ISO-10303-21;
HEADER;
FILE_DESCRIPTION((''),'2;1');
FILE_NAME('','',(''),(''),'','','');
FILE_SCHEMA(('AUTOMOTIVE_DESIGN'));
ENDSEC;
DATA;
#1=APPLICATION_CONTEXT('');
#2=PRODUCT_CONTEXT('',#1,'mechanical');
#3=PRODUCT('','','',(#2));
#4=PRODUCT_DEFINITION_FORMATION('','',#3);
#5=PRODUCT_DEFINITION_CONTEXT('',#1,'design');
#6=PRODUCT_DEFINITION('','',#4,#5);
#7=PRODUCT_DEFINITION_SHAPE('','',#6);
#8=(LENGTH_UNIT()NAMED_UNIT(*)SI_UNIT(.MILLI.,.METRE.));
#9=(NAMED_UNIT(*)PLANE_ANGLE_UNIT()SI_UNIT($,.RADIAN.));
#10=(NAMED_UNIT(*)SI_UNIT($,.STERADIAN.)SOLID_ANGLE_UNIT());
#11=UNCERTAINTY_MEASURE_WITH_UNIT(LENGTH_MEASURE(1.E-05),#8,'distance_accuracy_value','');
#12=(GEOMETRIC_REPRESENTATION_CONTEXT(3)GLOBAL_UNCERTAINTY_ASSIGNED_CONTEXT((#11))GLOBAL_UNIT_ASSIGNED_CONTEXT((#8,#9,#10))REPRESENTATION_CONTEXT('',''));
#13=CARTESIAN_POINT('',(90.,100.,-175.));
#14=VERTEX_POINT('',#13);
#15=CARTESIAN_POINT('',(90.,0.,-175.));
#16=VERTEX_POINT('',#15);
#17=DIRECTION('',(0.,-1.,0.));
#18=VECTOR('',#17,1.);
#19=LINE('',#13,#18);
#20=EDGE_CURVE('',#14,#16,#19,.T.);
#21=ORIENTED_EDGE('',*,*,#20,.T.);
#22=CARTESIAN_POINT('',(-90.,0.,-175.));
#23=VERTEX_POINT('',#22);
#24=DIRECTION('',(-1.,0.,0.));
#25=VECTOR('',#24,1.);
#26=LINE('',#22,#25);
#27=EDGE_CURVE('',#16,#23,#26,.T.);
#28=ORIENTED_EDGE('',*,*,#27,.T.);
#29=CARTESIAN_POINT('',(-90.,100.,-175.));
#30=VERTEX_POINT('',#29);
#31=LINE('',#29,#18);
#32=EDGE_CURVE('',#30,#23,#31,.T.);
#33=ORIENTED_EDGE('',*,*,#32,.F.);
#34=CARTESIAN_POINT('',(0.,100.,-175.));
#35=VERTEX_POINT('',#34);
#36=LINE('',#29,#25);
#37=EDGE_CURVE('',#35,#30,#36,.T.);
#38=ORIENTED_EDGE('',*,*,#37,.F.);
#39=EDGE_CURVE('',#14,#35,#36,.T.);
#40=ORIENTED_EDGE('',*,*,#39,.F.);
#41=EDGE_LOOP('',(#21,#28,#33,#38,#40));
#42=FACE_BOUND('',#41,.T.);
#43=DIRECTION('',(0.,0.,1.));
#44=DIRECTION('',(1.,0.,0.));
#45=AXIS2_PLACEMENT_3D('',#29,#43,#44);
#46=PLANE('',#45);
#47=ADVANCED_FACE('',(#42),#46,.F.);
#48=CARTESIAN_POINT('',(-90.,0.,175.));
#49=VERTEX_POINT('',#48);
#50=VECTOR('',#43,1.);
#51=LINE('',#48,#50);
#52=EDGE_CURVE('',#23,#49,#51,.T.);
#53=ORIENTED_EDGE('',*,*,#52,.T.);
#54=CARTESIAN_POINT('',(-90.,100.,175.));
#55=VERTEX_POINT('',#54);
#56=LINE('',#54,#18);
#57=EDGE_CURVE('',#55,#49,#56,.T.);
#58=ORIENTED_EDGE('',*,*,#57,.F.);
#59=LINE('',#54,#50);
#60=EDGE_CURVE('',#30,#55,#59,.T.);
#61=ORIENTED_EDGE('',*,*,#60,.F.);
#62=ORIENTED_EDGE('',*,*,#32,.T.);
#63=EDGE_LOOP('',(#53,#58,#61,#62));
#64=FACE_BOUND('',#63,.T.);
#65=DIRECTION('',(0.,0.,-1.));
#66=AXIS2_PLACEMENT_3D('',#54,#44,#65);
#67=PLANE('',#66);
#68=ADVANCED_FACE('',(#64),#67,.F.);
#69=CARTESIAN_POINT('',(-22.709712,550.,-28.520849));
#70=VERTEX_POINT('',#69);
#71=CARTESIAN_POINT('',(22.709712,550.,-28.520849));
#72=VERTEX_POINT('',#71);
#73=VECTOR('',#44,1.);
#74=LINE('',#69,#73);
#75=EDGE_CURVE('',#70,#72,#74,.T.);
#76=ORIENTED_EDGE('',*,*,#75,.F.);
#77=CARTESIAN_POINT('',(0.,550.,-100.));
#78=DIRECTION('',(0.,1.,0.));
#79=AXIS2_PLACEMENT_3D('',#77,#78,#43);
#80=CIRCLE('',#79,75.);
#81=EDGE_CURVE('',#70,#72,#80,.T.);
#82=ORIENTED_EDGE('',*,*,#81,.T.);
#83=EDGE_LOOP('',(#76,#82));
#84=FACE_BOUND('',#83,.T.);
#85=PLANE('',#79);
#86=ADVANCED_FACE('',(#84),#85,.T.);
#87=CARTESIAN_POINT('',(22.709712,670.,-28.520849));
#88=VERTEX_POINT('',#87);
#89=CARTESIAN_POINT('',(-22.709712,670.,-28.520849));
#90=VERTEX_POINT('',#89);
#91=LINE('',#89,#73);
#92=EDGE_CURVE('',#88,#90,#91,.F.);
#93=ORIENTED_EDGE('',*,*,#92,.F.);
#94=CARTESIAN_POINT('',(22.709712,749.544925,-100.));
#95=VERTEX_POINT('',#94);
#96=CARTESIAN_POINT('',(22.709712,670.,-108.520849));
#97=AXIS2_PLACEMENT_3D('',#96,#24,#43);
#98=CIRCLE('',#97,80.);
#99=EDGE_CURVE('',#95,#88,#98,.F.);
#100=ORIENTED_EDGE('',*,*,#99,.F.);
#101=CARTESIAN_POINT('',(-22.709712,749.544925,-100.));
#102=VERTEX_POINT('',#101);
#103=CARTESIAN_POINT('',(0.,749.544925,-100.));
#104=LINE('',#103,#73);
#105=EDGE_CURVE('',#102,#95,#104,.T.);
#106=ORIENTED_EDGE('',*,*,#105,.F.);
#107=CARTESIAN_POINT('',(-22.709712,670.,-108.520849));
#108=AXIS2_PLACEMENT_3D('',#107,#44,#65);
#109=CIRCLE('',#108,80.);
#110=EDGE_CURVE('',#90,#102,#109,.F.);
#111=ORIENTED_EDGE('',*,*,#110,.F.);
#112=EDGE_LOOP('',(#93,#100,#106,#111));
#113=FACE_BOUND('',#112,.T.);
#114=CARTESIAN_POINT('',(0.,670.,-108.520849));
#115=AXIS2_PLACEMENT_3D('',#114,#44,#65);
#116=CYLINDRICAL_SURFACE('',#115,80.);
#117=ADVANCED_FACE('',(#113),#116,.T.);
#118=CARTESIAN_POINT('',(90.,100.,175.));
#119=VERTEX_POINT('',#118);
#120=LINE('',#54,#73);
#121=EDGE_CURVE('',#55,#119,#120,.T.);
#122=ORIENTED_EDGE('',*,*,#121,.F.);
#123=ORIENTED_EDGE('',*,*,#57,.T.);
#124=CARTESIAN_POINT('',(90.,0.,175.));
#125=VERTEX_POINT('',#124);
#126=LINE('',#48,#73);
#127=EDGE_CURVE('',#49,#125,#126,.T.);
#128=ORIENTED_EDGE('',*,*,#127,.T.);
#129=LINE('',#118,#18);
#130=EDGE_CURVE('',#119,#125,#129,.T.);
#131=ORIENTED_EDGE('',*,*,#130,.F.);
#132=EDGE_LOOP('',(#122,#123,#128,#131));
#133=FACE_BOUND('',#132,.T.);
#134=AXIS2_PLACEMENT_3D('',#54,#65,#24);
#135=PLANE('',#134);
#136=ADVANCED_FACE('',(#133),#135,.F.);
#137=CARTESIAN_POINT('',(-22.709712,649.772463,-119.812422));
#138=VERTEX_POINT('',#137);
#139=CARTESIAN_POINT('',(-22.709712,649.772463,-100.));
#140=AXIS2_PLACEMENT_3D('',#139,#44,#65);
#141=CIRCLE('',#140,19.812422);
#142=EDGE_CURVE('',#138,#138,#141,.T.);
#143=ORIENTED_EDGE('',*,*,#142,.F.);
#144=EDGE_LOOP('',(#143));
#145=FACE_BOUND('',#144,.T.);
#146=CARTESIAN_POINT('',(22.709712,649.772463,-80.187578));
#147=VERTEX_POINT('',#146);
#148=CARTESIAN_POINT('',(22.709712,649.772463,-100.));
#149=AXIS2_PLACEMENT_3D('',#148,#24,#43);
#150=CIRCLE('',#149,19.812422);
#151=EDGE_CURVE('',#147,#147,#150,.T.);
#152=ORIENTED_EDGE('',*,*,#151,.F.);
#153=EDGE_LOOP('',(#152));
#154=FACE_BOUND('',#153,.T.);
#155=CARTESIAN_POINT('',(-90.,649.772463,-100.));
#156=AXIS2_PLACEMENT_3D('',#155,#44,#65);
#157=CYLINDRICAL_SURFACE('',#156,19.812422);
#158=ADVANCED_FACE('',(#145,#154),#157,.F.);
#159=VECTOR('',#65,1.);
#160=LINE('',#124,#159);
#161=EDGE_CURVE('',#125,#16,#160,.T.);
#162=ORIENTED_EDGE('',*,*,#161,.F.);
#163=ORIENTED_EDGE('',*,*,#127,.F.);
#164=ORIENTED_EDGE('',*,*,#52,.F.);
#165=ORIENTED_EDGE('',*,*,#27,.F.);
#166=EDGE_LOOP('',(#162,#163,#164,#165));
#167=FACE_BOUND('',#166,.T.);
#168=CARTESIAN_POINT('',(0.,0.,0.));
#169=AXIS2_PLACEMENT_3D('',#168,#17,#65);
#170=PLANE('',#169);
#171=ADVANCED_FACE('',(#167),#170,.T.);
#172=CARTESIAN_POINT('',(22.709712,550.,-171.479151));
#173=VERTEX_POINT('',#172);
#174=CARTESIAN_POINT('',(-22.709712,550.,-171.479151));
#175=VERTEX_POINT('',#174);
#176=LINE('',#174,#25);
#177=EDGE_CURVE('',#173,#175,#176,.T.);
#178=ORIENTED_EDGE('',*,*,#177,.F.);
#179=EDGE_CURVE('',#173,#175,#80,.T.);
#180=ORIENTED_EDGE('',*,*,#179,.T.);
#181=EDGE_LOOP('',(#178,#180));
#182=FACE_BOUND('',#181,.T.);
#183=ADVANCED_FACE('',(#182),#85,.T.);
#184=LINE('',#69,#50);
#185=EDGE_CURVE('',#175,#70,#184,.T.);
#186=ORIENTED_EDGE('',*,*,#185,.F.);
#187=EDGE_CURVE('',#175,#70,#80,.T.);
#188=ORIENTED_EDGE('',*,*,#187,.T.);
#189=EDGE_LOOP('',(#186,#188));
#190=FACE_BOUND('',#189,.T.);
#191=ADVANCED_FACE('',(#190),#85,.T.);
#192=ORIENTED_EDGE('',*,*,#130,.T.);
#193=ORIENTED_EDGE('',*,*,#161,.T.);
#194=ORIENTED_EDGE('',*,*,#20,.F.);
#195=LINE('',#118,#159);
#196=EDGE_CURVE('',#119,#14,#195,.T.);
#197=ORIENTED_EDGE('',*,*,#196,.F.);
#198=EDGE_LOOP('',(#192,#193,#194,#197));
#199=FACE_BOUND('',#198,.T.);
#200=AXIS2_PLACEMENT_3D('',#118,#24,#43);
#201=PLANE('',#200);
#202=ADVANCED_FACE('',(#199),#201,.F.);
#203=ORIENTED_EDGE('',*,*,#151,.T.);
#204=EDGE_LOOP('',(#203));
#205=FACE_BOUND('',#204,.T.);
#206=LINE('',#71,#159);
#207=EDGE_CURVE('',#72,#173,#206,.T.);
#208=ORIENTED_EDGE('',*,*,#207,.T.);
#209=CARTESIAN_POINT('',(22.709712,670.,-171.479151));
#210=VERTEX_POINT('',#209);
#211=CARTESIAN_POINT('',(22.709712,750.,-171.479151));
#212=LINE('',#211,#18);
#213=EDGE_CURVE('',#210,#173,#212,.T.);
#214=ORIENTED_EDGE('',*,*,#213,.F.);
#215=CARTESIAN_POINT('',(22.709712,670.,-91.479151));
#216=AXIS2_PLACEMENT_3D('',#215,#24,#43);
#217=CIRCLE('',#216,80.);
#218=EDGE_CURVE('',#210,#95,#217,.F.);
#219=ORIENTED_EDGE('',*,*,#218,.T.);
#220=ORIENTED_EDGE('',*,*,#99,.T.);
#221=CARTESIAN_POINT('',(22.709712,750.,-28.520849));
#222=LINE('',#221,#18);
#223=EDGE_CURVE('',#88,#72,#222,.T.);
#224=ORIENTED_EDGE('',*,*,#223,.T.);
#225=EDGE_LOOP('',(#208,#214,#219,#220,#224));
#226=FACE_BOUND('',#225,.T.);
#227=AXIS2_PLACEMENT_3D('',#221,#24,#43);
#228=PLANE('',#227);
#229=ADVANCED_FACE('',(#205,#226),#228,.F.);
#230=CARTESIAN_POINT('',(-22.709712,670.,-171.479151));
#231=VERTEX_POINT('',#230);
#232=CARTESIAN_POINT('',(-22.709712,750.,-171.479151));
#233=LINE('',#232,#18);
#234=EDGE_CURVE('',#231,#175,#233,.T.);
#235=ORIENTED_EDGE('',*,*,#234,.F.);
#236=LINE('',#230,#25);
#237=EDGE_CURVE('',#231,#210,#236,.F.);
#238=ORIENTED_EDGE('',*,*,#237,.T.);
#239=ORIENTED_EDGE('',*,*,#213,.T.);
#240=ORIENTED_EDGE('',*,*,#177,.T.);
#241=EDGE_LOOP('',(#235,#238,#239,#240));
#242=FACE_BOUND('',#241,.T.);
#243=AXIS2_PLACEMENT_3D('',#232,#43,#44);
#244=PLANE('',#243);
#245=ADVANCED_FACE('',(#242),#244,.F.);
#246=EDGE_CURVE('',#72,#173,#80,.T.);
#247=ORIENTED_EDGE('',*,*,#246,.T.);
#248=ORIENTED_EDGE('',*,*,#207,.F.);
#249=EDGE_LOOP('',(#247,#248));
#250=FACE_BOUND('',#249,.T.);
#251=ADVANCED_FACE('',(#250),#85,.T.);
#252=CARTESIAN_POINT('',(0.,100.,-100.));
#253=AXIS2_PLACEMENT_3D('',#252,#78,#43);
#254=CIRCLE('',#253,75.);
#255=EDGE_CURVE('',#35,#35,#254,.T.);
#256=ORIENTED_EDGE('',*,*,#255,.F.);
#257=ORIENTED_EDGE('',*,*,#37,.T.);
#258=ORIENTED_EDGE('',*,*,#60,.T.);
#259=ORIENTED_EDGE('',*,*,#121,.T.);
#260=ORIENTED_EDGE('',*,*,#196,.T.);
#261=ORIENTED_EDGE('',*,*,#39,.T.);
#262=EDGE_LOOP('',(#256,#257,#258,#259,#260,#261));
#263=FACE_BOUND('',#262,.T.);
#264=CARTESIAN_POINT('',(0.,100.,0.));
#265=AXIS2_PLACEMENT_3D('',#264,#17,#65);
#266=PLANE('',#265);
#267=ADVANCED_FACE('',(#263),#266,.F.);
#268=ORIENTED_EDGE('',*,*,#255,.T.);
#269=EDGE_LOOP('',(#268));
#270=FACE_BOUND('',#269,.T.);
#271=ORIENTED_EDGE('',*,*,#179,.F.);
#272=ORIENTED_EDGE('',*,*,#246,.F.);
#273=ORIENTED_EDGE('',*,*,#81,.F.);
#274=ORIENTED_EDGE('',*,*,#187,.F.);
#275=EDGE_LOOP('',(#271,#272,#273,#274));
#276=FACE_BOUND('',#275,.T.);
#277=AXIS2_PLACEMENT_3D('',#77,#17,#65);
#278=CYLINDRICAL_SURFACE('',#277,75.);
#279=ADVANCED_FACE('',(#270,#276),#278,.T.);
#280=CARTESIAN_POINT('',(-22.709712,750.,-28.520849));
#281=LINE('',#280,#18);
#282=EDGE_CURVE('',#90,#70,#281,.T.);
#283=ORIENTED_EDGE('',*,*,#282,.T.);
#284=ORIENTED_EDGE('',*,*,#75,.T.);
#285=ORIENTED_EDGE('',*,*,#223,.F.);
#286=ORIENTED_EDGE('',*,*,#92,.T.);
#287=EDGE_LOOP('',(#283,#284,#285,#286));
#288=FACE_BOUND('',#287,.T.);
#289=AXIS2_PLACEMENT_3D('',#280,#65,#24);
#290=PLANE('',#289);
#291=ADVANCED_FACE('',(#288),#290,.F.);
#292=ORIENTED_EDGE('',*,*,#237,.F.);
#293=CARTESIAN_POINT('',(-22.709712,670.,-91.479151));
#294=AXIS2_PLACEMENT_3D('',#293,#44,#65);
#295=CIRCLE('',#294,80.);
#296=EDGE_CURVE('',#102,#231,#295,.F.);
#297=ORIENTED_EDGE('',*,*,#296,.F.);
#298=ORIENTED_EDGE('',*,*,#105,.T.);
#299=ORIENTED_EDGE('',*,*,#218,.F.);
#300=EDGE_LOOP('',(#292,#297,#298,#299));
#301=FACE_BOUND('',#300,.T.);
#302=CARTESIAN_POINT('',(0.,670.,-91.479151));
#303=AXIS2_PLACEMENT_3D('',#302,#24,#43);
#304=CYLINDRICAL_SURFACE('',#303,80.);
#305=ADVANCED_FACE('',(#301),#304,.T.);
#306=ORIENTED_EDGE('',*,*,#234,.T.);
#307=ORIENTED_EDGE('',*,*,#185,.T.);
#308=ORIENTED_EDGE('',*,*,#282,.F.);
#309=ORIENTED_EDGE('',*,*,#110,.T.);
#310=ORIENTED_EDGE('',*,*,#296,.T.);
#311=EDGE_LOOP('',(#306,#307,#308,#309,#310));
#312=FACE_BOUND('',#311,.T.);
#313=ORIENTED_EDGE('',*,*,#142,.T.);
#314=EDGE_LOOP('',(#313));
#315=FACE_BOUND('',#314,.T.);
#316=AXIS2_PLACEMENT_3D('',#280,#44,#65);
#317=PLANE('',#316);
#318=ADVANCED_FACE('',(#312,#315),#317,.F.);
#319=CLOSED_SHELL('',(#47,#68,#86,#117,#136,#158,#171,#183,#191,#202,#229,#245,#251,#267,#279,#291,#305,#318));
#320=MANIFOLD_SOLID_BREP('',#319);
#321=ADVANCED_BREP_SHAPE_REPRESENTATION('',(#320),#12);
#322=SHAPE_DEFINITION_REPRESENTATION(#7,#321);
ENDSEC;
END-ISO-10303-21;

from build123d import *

# Parameters (mm, degrees)
SKETCH1_W               = 180
SKETCH1_H               = 350
BOSS_EXTRUDE1_DEPTH     = 100
SKETCH2_R               = 75
BOSS_EXTRUDE2_DEPTH     = 450
SKETCH3_W               = 45.419423784
SKETCH3_H               = 142.958301414
BOSS_EXTRUDE3_DEPTH     = 200
FILLET1_R               = 80
CUT_EXTRUDE1_DEPTH      = 778.911353606
CUT_EXTRUDE1_DEPTH_BACK = 778.911353606
SKETCH4_R               = 19.812422485


with BuildPart() as part:
    # Sketch1 → Boss-Extrude1 (new body)
    with BuildSketch(Plane(origin=(0, 0, 0), x_dir=(1, 0, 0), z_dir=(0, 1, 0))):
        Rectangle(SKETCH1_W, SKETCH1_H)
    extrude(amount=BOSS_EXTRUDE1_DEPTH)

    # Sketch2 → Boss-Extrude2 (add)
    with BuildSketch(Plane(origin=(0, 100, 0), x_dir=(1, 0, 0), z_dir=(0, 1, 0))):
        with Locations(Location((0, 100, 0), (0, 0, 90))):
            Circle(SKETCH2_R)
    extrude(amount=BOSS_EXTRUDE2_DEPTH)

    # Sketch3 → Boss-Extrude3 (add)
    with BuildSketch(Plane(origin=(0, 550, 0), x_dir=(1, 0, 0), z_dir=(0, 1, 0))):
        with Locations((0, 100)):
            Rectangle(SKETCH3_W, SKETCH3_H)
    extrude(amount=BOSS_EXTRUDE3_DEPTH)

    # Fillet1
    # the kernel refuses this fillet: 80 mm, written as the material it takes off along each edge
    with BuildSketch(Plane(origin=(222.709711892, 750, -171.479150707), x_dir=(0, -1, 0), z_dir=(-1, 0, 0)), Plane(origin=(-222.709711892, 750, -28.520849293), x_dir=(0, -1, 0), z_dir=(1, 0, 0))) as fillet1_piece_1:
        with BuildLine():
            CenterArc((FILLET1_R, FILLET1_R), FILLET1_R, 180, 90)
            Line((0, FILLET1_R), (0, 0))
            Line((0, 0), (FILLET1_R, 0))
        make_face()
    extrude(amount=445.419423783, mode=Mode.SUBTRACT)

    # Sketch4 → Cut-Extrude1 (cut, two sides: drawn at the far end of the back side and taken through both)
    with BuildSketch(Plane(origin=(-22.709711892, 0, 0), x_dir=(0, 0, -1), z_dir=(1, 0, 0)).offset(-CUT_EXTRUDE1_DEPTH_BACK)):
        with Locations((100, 649.772462607)):
            Circle(SKETCH4_R)
    extrude(amount=CUT_EXTRUDE1_DEPTH + CUT_EXTRUDE1_DEPTH_BACK, mode=Mode.SUBTRACT)


solid = part.part
